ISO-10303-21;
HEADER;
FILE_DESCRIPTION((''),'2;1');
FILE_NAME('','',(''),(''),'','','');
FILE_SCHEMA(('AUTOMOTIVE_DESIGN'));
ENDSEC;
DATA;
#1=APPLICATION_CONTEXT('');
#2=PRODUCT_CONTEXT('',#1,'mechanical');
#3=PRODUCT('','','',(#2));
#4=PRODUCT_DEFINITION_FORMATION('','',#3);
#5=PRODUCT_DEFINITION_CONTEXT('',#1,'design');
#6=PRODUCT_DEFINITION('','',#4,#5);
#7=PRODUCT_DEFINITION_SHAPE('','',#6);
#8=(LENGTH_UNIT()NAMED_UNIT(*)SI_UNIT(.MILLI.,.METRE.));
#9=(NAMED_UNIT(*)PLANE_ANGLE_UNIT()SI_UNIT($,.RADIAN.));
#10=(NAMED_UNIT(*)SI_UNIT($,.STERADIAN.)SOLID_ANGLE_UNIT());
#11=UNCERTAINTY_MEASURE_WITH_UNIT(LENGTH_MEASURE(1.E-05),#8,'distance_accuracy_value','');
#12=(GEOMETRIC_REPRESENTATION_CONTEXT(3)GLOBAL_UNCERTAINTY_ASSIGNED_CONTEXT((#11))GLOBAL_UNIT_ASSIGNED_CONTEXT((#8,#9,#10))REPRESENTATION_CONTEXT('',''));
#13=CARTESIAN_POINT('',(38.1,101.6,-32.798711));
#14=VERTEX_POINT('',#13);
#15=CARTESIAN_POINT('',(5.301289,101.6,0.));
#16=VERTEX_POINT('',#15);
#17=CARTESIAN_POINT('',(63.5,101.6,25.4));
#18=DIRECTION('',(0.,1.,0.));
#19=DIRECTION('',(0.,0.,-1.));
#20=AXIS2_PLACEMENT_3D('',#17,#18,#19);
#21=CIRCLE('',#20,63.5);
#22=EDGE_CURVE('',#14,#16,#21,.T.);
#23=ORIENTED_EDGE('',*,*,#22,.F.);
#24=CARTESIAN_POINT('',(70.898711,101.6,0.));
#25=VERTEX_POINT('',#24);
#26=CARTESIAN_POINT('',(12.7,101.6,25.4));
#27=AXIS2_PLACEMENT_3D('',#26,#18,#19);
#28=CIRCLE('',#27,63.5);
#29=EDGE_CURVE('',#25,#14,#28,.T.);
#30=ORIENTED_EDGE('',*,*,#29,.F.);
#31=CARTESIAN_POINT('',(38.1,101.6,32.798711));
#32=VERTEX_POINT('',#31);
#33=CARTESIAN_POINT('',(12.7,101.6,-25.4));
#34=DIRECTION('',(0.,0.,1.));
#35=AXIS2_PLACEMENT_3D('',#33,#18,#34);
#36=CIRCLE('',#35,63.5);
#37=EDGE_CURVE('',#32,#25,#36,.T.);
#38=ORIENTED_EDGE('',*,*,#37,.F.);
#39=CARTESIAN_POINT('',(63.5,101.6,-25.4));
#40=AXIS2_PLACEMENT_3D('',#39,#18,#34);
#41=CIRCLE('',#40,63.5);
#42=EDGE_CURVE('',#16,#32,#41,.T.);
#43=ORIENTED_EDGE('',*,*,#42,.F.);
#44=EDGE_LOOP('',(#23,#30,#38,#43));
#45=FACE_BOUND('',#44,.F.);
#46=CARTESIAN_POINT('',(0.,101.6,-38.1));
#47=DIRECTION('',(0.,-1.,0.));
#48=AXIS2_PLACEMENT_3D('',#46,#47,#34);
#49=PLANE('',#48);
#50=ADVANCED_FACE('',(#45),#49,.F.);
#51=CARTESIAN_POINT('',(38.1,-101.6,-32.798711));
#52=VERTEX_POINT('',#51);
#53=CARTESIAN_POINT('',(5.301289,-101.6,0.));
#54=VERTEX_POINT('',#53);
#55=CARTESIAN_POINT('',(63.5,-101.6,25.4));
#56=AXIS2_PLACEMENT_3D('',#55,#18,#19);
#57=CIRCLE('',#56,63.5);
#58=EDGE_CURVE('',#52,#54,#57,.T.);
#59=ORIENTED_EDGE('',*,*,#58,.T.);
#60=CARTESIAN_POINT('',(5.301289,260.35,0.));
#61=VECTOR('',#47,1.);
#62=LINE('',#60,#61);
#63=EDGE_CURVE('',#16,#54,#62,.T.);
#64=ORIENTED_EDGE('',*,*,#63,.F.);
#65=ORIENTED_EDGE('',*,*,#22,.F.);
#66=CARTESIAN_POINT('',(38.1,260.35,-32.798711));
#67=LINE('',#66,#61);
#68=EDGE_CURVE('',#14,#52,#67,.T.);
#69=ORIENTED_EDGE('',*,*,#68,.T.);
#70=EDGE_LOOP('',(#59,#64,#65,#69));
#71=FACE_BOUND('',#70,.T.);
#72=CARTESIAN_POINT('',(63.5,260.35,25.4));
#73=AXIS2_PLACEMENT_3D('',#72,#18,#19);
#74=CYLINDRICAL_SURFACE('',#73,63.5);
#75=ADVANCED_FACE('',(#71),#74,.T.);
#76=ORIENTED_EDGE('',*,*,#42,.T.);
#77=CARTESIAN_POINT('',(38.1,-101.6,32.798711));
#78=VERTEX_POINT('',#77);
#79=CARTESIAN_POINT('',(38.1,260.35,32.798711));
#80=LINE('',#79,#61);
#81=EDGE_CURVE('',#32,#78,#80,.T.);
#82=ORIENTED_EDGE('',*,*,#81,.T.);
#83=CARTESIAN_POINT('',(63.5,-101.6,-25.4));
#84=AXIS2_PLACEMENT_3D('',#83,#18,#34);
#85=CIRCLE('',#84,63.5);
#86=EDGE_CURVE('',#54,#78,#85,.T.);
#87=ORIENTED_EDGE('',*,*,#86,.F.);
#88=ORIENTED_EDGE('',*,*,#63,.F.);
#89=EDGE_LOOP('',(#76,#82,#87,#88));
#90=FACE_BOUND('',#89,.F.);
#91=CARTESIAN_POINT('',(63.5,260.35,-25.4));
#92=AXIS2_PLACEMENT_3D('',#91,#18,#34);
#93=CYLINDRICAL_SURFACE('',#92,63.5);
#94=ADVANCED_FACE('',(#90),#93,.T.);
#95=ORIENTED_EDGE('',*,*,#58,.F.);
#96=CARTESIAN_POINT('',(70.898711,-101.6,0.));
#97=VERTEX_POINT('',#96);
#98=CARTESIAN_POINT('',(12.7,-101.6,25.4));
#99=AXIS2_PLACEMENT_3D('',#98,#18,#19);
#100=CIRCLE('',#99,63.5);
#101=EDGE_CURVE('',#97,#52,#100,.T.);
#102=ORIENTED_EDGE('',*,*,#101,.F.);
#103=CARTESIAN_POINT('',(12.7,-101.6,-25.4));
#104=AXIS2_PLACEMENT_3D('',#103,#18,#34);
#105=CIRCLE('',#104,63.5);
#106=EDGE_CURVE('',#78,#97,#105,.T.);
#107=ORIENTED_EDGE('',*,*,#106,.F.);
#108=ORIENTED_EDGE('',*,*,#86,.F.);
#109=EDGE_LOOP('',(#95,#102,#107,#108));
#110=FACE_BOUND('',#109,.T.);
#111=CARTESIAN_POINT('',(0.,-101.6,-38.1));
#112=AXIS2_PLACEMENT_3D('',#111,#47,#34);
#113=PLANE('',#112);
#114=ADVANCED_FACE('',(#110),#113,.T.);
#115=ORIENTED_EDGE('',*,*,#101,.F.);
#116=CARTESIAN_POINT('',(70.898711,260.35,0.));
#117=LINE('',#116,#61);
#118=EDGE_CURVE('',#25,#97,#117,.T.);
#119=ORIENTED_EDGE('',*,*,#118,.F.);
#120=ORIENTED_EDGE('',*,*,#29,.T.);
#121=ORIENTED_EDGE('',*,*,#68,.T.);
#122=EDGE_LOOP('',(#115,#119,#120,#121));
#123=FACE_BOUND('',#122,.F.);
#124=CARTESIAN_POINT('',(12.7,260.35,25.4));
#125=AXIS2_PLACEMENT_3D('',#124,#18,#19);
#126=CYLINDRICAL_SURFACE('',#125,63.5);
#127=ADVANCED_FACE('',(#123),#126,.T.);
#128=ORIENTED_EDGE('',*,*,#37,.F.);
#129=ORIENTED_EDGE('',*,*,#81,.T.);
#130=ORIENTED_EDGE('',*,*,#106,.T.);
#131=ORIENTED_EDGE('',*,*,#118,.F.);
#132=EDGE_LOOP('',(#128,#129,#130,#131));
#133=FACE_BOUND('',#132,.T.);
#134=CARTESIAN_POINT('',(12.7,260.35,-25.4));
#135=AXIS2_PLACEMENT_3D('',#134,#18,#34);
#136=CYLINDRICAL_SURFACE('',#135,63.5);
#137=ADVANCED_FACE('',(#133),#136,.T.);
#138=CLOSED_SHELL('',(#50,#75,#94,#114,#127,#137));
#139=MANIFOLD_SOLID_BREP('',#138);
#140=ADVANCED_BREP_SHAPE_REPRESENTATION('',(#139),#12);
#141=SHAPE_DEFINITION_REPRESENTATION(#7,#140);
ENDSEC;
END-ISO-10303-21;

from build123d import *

# Parameters (mm, degrees)
F0_W        = 203.2
F0_H        = 76.2
F1_DEPTH    = 76.2
F2_T1_DEPTH = 520.7


# Not quite as in the source:
# - a fillet or chamfer that OpenCascade refuses, or shapes differently, is made with other operations: its cross-section is extruded or revolved along the edge and cut away or added


with BuildPart() as f1:
    # F0 (on Right) → F1 (new body)
    with BuildSketch(Plane.YZ):
        Rectangle(F0_W, F0_H)
    extrude(amount=F1_DEPTH)

    # F2: fillet of radius 63.5 on 4 edges, made by hand

    # F2_s2 → F2_t1 (cut)
    with BuildSketch(Plane.XZ.offset(-260.35)):
        with BuildLine():
            ThreePointArc((63.5, 38.1), (18.5987193947, 19.5012806053), (0, -25.4))
            Line((0, -25.4), (0, 38.1))
            Line((0, 38.1), (63.5, 38.1))
        make_face()
        with BuildLine():
            ThreePointArc((63.5, -38.1), (18.5987193947, -19.5012806053), (0, 25.4))
            Line((0, 25.4), (0, -38.1))
            Line((0, -38.1), (63.5, -38.1))
        make_face()
        with BuildLine():
            ThreePointArc((12.7, 38.1), (57.6012806053, 19.5012806053), (76.2, -25.4))
            Line((76.2, -25.4), (76.2, 38.1))
            Line((76.2, 38.1), (12.7, 38.1))
        make_face()
        with BuildLine():
            ThreePointArc((12.7, -38.1), (57.6012806053, -19.5012806053), (76.2, 25.4))
            Line((76.2, 25.4), (76.2, -38.1))
            Line((76.2, -38.1), (12.7, -38.1))
        make_face()
    extrude(amount=F2_T1_DEPTH, mode=Mode.SUBTRACT)


solid = f1.part
